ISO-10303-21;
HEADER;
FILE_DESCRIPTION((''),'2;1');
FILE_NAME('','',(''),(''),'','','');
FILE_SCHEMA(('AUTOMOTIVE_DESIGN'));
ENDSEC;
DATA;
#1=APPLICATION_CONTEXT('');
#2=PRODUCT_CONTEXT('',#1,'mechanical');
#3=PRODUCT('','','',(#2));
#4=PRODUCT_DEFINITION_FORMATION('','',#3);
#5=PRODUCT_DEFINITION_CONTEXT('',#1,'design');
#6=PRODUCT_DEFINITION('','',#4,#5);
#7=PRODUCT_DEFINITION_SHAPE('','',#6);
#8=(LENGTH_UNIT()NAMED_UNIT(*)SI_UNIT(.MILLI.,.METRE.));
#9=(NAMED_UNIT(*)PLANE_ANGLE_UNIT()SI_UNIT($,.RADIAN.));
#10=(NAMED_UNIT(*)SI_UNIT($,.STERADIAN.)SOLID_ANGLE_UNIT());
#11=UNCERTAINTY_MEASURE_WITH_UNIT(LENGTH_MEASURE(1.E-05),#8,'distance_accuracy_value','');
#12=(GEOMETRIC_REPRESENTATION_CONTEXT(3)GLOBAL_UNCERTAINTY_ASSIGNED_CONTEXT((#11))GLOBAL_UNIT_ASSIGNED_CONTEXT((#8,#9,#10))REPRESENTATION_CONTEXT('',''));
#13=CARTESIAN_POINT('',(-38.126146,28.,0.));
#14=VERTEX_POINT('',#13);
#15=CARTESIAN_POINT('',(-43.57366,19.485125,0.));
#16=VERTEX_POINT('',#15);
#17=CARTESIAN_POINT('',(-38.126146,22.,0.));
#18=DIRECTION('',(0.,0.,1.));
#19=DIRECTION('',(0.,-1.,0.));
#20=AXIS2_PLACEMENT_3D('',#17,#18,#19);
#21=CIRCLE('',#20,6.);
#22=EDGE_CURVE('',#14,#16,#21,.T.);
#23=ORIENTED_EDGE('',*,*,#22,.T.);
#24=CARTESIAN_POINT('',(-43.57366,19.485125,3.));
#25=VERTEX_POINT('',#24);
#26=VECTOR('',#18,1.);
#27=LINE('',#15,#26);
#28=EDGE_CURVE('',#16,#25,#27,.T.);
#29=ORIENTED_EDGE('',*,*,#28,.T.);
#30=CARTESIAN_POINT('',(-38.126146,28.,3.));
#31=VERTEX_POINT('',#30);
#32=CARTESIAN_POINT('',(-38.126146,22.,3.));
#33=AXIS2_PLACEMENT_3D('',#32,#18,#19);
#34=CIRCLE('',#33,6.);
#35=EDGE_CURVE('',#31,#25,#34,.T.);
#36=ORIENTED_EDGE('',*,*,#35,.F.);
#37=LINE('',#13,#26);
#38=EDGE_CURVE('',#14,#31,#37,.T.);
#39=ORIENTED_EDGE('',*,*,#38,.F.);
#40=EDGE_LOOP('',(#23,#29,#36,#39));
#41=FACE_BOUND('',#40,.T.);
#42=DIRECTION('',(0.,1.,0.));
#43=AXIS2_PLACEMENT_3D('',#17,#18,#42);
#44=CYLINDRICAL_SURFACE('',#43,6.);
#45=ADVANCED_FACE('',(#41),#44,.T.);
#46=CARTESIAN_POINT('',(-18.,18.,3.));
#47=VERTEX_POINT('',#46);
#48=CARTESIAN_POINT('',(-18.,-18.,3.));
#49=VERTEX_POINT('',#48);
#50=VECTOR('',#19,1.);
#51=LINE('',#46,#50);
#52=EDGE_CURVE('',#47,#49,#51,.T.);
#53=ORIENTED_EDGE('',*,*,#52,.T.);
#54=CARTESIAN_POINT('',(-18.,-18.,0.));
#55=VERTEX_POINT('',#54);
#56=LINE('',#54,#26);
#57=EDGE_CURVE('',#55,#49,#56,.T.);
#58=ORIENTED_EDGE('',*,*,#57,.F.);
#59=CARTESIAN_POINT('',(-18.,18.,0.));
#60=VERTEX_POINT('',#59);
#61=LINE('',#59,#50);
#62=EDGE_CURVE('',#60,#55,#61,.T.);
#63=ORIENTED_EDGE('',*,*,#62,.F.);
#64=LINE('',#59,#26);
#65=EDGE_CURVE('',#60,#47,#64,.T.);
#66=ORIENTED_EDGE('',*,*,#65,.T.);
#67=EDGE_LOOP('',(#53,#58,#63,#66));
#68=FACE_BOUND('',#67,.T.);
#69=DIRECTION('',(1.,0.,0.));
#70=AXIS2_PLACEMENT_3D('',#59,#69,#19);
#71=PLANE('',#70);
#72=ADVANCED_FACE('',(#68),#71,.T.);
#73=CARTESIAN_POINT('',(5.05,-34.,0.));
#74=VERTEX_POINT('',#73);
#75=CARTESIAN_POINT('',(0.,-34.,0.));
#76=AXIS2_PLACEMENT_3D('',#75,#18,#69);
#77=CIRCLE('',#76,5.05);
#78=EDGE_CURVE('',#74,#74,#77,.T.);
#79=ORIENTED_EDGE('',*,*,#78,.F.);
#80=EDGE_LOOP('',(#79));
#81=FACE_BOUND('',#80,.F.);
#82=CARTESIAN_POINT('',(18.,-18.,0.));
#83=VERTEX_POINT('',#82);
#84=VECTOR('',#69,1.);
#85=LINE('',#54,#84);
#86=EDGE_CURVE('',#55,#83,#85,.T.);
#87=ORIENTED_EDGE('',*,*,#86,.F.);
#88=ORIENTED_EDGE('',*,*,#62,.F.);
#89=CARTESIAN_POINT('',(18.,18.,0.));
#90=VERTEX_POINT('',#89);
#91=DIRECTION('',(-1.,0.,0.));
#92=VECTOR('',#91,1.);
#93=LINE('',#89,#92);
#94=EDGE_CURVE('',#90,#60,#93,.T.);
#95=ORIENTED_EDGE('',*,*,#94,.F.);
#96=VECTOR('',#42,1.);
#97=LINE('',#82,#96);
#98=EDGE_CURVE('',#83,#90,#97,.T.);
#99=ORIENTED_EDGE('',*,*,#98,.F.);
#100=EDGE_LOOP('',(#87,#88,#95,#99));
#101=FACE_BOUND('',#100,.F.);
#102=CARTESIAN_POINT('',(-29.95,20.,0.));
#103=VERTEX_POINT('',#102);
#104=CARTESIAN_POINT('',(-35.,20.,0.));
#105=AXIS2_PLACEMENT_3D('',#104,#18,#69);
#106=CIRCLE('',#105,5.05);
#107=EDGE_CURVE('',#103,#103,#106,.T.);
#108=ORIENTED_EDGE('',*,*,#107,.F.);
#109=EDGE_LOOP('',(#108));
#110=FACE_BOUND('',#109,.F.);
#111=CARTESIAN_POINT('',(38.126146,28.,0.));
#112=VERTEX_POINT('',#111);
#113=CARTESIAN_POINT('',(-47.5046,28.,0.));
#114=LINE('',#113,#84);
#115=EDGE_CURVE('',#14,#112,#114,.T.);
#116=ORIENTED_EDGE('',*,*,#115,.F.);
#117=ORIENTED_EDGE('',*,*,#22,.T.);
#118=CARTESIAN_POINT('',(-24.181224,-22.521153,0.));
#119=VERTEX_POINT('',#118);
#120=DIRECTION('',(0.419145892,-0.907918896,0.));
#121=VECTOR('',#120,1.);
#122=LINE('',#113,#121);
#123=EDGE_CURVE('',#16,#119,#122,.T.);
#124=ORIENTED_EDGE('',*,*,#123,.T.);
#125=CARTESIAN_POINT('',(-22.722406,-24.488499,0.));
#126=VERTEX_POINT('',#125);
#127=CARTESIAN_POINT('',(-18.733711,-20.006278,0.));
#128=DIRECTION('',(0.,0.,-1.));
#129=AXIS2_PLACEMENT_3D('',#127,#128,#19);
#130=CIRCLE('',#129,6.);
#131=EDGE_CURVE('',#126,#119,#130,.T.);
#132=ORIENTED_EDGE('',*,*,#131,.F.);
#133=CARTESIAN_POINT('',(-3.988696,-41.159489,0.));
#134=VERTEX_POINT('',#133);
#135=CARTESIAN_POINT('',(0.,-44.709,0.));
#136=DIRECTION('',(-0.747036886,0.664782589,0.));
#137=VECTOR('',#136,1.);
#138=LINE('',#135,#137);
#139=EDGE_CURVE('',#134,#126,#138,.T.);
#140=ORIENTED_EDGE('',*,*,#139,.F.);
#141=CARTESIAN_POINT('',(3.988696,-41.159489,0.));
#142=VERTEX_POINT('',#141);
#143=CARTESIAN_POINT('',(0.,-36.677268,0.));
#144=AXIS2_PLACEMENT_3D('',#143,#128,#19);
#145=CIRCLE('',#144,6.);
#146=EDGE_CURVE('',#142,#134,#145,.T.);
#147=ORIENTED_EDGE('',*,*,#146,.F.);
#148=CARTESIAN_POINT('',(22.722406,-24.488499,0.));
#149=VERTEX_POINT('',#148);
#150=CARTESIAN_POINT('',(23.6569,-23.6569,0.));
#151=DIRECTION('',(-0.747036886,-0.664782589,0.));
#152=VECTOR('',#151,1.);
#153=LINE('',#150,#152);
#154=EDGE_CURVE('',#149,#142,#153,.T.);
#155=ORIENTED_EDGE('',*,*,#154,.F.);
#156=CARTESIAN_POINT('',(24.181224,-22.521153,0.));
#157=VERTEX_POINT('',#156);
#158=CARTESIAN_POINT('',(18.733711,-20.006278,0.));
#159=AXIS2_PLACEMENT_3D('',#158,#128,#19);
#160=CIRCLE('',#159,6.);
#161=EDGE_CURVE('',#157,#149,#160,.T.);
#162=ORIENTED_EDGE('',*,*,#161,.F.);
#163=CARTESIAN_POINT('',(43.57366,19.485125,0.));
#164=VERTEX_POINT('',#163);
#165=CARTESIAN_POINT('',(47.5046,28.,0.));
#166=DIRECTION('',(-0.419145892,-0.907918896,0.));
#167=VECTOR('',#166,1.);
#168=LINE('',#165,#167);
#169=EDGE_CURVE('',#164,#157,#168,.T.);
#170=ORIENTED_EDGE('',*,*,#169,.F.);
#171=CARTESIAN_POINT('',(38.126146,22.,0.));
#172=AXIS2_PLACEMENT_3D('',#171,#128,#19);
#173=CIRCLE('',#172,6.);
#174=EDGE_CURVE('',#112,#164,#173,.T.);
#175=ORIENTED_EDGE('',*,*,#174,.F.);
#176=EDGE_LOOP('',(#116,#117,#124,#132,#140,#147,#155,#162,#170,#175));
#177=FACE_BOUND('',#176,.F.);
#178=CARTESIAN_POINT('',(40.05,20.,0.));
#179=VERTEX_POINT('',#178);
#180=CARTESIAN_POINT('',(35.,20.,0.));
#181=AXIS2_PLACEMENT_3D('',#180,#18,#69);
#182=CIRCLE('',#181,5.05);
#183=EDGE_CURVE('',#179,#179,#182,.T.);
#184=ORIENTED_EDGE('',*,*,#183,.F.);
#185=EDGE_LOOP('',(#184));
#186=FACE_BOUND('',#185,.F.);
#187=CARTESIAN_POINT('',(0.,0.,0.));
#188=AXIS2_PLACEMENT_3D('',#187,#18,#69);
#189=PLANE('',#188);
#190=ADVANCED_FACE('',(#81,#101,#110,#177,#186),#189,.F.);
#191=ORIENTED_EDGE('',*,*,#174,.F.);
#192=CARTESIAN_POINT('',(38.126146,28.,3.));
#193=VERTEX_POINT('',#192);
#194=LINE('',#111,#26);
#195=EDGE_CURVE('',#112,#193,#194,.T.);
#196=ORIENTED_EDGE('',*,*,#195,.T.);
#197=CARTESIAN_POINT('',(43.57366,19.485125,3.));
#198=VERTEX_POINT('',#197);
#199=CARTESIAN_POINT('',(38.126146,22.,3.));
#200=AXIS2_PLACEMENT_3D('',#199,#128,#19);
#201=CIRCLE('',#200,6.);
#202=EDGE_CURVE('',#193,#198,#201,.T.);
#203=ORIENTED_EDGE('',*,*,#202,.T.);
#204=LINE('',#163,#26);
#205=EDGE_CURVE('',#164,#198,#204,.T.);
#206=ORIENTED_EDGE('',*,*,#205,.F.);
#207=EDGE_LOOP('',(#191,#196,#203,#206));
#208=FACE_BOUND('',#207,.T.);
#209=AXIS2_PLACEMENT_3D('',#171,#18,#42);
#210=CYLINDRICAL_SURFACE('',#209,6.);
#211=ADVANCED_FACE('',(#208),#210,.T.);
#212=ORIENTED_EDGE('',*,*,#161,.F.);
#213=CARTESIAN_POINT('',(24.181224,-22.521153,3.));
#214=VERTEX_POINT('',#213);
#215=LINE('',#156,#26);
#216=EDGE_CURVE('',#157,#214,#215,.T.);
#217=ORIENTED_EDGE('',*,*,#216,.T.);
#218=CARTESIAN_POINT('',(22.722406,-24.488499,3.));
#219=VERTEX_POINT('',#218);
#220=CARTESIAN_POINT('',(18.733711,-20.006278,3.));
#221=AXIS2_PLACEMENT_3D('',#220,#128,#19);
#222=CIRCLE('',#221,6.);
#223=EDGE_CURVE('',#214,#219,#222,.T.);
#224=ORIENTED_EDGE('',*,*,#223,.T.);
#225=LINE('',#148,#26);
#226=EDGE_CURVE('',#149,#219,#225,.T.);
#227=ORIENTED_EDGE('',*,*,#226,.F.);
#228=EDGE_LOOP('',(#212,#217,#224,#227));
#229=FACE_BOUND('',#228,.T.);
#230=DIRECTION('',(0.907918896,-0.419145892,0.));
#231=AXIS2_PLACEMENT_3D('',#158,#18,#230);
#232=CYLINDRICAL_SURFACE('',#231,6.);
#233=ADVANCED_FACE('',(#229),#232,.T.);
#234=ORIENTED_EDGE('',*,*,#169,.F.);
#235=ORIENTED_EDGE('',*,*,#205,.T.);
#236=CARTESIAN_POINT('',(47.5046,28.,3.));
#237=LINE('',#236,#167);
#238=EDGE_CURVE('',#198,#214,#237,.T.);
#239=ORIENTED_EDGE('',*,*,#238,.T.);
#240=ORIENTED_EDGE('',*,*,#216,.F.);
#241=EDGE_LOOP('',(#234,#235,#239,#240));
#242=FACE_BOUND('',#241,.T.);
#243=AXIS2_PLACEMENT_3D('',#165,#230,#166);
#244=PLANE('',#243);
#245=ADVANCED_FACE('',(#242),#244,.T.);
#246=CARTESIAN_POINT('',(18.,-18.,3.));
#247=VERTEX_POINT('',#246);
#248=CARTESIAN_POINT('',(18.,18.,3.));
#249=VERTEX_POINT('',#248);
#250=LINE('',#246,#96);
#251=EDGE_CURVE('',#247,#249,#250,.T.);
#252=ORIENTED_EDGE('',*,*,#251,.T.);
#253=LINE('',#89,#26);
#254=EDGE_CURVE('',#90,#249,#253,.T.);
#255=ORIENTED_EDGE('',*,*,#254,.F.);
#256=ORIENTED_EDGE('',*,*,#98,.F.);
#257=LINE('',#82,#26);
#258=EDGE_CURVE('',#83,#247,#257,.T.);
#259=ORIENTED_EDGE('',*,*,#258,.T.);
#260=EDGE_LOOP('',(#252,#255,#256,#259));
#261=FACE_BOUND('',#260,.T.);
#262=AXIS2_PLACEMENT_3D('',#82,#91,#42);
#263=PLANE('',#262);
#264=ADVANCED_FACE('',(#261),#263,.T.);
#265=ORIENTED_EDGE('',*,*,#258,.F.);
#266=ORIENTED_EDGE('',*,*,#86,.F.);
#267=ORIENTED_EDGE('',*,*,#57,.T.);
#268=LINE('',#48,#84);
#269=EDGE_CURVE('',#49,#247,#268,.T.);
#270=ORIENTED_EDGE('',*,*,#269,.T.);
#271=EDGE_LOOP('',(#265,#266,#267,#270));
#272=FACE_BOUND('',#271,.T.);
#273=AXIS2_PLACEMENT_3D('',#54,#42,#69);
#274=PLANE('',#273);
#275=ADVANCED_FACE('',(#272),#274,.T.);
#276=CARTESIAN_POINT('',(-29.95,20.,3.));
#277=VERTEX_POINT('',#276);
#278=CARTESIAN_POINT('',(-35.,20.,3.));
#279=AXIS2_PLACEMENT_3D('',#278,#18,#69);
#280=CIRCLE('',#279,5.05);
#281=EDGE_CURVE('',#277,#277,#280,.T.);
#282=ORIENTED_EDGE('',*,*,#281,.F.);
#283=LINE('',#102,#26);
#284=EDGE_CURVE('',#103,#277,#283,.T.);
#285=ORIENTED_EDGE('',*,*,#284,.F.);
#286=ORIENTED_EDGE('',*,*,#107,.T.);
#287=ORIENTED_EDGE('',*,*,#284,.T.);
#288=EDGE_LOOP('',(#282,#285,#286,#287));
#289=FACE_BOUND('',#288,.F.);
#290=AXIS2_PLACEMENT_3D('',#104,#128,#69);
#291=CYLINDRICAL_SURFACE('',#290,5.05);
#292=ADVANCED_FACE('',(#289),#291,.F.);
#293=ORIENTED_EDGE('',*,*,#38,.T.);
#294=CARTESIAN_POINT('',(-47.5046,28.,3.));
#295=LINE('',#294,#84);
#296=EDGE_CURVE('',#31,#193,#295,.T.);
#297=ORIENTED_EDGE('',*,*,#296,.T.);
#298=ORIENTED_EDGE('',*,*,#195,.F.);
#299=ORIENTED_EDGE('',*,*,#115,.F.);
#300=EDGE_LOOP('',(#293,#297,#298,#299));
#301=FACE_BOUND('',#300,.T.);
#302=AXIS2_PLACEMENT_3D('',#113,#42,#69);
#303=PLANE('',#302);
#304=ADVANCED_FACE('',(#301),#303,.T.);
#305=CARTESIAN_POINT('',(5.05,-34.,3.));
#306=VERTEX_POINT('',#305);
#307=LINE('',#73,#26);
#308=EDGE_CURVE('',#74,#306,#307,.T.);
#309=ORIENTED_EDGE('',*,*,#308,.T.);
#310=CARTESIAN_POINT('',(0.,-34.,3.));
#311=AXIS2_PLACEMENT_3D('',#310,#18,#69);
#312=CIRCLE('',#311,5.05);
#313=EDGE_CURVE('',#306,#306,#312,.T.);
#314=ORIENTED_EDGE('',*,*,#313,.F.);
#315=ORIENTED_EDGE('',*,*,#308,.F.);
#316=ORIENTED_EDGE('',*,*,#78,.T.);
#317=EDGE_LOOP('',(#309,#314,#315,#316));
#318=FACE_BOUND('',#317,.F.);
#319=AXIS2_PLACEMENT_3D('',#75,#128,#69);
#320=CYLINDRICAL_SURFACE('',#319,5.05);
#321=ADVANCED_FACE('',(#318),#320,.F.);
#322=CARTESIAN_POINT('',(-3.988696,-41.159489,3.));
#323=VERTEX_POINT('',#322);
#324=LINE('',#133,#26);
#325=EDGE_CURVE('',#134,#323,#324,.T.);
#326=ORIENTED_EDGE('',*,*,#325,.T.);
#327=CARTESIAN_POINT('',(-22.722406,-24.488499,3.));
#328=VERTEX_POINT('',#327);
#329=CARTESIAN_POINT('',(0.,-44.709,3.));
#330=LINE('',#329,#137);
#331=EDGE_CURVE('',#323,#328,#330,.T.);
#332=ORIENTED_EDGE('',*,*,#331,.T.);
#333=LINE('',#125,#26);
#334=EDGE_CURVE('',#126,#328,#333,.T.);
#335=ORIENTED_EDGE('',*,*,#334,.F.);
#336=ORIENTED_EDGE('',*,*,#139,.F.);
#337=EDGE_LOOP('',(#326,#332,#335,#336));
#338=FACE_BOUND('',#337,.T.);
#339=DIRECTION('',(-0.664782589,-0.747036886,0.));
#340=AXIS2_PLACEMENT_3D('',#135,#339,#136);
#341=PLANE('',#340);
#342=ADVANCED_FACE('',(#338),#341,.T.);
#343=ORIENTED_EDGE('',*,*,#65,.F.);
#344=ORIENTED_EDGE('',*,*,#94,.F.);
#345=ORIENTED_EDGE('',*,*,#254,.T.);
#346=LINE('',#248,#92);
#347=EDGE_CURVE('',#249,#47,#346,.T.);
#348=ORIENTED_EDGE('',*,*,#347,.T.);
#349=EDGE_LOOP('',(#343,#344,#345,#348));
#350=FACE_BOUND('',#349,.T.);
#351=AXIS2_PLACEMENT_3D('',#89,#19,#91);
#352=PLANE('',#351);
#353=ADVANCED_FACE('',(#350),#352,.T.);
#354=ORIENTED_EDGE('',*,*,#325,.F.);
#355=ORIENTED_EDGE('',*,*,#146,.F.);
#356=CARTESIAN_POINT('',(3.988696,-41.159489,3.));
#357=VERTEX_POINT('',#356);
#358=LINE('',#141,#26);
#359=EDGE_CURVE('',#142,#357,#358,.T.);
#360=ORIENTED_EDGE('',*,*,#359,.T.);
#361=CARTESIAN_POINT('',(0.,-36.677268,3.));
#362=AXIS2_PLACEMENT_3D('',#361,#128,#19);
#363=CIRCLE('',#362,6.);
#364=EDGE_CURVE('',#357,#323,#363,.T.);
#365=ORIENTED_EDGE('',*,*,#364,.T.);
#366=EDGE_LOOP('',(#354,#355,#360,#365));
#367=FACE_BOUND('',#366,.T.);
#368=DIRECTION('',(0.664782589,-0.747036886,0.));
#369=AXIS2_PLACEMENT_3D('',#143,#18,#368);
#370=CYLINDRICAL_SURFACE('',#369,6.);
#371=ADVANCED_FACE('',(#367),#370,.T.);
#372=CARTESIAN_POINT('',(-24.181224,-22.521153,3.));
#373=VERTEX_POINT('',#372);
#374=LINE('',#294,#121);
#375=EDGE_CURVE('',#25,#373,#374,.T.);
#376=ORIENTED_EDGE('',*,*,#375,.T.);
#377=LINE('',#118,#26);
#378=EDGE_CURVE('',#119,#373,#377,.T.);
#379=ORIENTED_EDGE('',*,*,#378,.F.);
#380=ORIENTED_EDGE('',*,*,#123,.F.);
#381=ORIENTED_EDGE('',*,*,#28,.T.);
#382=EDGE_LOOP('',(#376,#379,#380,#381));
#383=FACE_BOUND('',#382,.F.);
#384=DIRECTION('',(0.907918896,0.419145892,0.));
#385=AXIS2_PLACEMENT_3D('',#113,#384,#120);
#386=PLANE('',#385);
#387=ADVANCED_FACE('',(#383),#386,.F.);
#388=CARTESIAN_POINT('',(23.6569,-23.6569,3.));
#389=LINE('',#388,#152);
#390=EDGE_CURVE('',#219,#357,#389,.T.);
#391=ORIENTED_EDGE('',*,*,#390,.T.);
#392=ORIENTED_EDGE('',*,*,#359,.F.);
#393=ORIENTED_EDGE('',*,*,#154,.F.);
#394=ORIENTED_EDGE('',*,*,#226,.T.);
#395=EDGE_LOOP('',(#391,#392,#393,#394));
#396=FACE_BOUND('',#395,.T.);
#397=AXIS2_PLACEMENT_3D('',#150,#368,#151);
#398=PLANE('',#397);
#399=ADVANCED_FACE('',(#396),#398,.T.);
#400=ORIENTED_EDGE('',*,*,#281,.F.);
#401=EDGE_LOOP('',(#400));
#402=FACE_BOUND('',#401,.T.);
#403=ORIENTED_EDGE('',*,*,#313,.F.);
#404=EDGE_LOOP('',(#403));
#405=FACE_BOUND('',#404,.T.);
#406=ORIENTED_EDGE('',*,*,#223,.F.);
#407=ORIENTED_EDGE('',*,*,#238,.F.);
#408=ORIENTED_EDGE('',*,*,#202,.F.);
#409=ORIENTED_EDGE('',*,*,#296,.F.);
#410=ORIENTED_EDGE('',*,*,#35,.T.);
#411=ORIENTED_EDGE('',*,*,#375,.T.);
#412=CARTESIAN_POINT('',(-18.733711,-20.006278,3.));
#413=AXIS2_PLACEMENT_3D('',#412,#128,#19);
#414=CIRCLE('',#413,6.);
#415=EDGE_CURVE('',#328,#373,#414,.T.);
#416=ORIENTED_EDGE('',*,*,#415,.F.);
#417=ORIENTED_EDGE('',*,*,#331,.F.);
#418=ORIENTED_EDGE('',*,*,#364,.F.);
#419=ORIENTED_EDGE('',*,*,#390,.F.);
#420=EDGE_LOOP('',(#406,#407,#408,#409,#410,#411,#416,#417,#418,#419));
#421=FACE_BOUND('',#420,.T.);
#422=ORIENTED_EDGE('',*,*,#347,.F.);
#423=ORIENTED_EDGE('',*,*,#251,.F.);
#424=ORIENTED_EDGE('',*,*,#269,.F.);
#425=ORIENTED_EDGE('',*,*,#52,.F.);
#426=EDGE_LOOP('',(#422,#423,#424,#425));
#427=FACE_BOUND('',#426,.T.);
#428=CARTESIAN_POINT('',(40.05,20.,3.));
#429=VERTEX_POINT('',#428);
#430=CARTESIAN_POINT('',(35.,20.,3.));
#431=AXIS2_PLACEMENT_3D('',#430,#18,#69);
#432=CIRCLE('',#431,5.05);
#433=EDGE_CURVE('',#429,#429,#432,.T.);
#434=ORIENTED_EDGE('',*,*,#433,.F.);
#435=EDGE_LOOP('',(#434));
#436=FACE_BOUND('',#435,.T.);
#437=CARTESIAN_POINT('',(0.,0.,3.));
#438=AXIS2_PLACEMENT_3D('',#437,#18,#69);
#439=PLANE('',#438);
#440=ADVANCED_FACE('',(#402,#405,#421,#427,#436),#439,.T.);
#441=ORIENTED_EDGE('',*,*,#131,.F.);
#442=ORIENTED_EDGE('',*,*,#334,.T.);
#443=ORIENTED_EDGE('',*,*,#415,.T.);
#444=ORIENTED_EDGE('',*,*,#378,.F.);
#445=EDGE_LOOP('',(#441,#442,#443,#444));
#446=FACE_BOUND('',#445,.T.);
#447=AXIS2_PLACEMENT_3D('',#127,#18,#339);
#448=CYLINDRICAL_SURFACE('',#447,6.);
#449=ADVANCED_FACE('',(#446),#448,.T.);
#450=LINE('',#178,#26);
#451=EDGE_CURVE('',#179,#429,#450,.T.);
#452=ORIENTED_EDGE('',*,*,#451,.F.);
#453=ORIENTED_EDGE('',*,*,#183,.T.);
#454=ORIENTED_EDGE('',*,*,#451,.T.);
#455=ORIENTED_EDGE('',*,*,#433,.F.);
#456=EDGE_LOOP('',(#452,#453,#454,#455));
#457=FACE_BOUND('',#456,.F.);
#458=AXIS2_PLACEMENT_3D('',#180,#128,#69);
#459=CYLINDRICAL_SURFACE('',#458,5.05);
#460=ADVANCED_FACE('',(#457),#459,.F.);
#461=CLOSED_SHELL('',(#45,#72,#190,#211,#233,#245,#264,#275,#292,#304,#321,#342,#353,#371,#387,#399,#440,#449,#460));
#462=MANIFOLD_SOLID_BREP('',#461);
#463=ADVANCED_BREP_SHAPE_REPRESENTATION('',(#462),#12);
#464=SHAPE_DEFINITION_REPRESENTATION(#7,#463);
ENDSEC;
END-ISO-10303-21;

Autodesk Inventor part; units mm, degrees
ref_plane "YZ Plane" through (0, 0, 0) normal (1, 0, 0) x (0, 1, 0)
ref_plane "XZ Plane" through (0, 0, 0) normal (0, 1, 0) x (-1, 0, 0)
ref_plane "XY Plane" through (0, 0, 0) normal (0, 0, 1) x (1, 0, 0)
sketch "Sketch6" plane through (0, 0, 0) normal (0, 0, 1) x (1, 0, 0)
  line L0 (18, 18) -> (-18, 18)
  line L1 (-18, 18) -> (-18, -18)
  line L2 (-18, -18) -> (18, -18)
  line L3 (18, -18) -> (18, 18)
  line L4 (18, 18) -> (-18, -18) construction
  circle A0 centre (0, -34) radius 5.05
  circle A1 centre (35, 20) radius 5.05
  circle A2 centre (-35, 20) radius 5.05
  line L5 (35, 20) -> (-35, 20) construction
  line L6 (-35, 20) -> (0, -34) construction
  line L7 (0, -34) -> (35, 20) construction
  line L8 (0, 18) -> (0, -18) construction
  line L9 (-47.5046, 28) -> (47.5046, 28)
  line L10 (-18, 18) -> (23.6569, -23.6569) construction
  line L11 (18, 18) -> (-23.6569, -23.6569) construction
  line L12 (47.5046, 28) -> (23.6569, -23.6569)
  line L13 (23.6569, -23.6569) -> (0, -44.709)
  line L14 (0, -44.709) -> (-23.6569, -23.6569)
  line L15 (-47.5046, 28) -> (-23.6569, -23.6569)
  line L16 (-35, 20) -> (-42.2633, 16.6468) construction
  line L17 (0, -34) -> (-5.3183, -39.9763) construction
  point P0 (0, 0)
  point P1 (0, 0)
  point P2 (60, 0)
  point P3 (0, 28)
  point P4 (0, 0)
  dimension "d30" = 36
  dimension "d31" = 36
  dimension "d33" = 10.1
  dimension "d37" = 64.3506
  dimension "d52" = 70
  dimension "d53" = 8
  dimension "d54" = 20
  dimension "d57" = 8
  dimension "d59" = 8
  dimension "d60" = 95.0092
  dimension "d61" = 54
  dimension "d62" = 8
  dimension "d63" = 8
  dimension "d64" = 10
extrude "Plate3" add sketch "Sketch6" along normal blind 3
fillet "Corner Round2" radius 6 5 edges at (-47.5046, 28, 1.5) (47.5046, 28, 1.5) (0, -44.709, 1.5) (-23.6569, -23.6569, 1.5) (23.6569, -23.6569, 1.5)
equation "\"d41\" = Thickness"
equation "\"BendReliefWidth\" = Thickness"
equation "\"BendReliefDepth\" = 0.5 * Thickness"
equation "\"CornerReliefSize\" = 4 * Thickness"
equation "\"MinimumRemnant\" = 2 * Thickness"
equation "\"TransitionRadius\" = BendRadius"
equation "\"JacobiRadiusSize\" = BendRadius"
equation "\"GapSize\" = Thickness"
equation "\"Thickness\" = 3"
equation "\"BendRadius\" = 5"
properties part number "DSB-507 beam flange" material "Stainless Steel"
